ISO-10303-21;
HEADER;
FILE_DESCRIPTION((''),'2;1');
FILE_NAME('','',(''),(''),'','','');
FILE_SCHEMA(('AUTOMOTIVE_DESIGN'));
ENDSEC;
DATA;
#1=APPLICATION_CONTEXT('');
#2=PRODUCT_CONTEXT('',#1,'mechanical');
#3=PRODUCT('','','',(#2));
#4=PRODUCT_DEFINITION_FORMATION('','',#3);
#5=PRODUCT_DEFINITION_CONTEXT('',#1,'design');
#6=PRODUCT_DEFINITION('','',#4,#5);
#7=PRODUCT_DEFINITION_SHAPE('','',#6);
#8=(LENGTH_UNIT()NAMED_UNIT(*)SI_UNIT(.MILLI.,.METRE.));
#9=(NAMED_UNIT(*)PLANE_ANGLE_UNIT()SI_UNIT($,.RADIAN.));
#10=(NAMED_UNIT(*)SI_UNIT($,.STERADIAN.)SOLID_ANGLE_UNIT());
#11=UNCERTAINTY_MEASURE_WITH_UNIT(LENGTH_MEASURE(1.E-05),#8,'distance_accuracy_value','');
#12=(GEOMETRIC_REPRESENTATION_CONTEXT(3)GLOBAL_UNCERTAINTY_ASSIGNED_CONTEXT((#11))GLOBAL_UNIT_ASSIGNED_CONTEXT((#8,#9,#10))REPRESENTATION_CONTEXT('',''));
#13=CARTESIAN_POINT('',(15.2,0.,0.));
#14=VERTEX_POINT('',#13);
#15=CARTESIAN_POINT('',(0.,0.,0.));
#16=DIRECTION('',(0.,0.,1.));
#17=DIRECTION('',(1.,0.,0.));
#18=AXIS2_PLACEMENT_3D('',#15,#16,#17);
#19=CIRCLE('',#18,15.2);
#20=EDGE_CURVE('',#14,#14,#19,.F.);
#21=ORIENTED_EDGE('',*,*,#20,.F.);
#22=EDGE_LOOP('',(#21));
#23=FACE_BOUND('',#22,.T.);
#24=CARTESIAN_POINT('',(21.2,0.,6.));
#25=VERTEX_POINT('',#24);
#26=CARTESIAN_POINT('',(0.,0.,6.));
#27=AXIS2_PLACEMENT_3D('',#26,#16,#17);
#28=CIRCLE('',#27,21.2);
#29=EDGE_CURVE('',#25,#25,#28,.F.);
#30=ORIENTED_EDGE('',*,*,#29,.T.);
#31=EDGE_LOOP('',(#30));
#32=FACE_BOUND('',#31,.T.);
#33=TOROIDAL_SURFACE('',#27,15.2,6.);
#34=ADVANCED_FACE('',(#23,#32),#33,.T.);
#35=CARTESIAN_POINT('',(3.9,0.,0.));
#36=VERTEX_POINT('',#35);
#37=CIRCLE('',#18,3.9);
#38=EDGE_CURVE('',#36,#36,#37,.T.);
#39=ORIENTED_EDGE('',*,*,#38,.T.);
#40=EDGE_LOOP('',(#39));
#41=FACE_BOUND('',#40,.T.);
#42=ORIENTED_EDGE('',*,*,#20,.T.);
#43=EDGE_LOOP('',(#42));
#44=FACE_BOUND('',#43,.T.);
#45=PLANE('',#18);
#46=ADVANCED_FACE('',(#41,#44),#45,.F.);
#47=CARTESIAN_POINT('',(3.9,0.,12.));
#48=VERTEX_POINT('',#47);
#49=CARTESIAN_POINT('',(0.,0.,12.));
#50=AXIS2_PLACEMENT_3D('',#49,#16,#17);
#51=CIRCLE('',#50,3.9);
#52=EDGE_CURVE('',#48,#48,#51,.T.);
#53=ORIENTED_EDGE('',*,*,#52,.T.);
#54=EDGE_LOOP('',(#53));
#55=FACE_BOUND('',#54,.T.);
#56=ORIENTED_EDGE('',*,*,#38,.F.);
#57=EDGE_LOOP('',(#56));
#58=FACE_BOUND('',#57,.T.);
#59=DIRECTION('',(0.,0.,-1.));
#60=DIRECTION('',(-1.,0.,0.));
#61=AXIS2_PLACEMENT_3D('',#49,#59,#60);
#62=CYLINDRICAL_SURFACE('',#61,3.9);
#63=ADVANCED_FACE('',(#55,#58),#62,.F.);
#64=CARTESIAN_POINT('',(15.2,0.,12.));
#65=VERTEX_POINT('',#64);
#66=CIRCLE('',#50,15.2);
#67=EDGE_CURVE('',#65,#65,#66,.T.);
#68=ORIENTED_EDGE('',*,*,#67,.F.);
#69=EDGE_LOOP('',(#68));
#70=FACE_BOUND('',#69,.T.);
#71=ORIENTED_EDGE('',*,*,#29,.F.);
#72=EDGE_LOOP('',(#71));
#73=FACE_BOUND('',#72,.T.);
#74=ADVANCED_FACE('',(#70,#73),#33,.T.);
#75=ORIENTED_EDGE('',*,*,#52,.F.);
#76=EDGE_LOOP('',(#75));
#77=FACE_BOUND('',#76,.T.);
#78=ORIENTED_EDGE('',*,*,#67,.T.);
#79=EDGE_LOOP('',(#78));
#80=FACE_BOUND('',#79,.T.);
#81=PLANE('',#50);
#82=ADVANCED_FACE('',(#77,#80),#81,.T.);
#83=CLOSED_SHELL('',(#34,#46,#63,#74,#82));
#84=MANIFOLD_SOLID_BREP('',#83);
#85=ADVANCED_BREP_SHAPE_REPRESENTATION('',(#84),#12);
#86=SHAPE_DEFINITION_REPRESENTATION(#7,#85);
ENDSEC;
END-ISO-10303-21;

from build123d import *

# Parameters (mm, degrees)
SKETCH_1_R      = 21.2
SKETCH_1_R_2    = 3.9
EXTRUDE_1_DEPTH = 12
FILLET_1_R      = 6
FILLET_2_R      = 6


with BuildPart() as part:
    # 草圖1 → 填料-伸長1 (new body)
    with BuildSketch(Plane.XY):
        Circle(SKETCH_1_R)
        Circle(SKETCH_1_R_2, mode=Mode.SUBTRACT)
    extrude(amount=EXTRUDE_1_DEPTH)

    # 圓角1
    fillet_1_edges = [part.edges().sort_by_distance(p)[0] for p in [
        (-21.2, 0, 12),
    ]]
    fillet(fillet_1_edges, radius=FILLET_1_R)

    # 圓角2
    fillet_2_edges = [part.edges().sort_by_distance(p)[0] for p in [
        (-21.2, 0, 0),
    ]]
    fillet(fillet_2_edges, radius=FILLET_2_R - 0.0001)  # a hair under: the kernel refuses the full size


solid = part.part
